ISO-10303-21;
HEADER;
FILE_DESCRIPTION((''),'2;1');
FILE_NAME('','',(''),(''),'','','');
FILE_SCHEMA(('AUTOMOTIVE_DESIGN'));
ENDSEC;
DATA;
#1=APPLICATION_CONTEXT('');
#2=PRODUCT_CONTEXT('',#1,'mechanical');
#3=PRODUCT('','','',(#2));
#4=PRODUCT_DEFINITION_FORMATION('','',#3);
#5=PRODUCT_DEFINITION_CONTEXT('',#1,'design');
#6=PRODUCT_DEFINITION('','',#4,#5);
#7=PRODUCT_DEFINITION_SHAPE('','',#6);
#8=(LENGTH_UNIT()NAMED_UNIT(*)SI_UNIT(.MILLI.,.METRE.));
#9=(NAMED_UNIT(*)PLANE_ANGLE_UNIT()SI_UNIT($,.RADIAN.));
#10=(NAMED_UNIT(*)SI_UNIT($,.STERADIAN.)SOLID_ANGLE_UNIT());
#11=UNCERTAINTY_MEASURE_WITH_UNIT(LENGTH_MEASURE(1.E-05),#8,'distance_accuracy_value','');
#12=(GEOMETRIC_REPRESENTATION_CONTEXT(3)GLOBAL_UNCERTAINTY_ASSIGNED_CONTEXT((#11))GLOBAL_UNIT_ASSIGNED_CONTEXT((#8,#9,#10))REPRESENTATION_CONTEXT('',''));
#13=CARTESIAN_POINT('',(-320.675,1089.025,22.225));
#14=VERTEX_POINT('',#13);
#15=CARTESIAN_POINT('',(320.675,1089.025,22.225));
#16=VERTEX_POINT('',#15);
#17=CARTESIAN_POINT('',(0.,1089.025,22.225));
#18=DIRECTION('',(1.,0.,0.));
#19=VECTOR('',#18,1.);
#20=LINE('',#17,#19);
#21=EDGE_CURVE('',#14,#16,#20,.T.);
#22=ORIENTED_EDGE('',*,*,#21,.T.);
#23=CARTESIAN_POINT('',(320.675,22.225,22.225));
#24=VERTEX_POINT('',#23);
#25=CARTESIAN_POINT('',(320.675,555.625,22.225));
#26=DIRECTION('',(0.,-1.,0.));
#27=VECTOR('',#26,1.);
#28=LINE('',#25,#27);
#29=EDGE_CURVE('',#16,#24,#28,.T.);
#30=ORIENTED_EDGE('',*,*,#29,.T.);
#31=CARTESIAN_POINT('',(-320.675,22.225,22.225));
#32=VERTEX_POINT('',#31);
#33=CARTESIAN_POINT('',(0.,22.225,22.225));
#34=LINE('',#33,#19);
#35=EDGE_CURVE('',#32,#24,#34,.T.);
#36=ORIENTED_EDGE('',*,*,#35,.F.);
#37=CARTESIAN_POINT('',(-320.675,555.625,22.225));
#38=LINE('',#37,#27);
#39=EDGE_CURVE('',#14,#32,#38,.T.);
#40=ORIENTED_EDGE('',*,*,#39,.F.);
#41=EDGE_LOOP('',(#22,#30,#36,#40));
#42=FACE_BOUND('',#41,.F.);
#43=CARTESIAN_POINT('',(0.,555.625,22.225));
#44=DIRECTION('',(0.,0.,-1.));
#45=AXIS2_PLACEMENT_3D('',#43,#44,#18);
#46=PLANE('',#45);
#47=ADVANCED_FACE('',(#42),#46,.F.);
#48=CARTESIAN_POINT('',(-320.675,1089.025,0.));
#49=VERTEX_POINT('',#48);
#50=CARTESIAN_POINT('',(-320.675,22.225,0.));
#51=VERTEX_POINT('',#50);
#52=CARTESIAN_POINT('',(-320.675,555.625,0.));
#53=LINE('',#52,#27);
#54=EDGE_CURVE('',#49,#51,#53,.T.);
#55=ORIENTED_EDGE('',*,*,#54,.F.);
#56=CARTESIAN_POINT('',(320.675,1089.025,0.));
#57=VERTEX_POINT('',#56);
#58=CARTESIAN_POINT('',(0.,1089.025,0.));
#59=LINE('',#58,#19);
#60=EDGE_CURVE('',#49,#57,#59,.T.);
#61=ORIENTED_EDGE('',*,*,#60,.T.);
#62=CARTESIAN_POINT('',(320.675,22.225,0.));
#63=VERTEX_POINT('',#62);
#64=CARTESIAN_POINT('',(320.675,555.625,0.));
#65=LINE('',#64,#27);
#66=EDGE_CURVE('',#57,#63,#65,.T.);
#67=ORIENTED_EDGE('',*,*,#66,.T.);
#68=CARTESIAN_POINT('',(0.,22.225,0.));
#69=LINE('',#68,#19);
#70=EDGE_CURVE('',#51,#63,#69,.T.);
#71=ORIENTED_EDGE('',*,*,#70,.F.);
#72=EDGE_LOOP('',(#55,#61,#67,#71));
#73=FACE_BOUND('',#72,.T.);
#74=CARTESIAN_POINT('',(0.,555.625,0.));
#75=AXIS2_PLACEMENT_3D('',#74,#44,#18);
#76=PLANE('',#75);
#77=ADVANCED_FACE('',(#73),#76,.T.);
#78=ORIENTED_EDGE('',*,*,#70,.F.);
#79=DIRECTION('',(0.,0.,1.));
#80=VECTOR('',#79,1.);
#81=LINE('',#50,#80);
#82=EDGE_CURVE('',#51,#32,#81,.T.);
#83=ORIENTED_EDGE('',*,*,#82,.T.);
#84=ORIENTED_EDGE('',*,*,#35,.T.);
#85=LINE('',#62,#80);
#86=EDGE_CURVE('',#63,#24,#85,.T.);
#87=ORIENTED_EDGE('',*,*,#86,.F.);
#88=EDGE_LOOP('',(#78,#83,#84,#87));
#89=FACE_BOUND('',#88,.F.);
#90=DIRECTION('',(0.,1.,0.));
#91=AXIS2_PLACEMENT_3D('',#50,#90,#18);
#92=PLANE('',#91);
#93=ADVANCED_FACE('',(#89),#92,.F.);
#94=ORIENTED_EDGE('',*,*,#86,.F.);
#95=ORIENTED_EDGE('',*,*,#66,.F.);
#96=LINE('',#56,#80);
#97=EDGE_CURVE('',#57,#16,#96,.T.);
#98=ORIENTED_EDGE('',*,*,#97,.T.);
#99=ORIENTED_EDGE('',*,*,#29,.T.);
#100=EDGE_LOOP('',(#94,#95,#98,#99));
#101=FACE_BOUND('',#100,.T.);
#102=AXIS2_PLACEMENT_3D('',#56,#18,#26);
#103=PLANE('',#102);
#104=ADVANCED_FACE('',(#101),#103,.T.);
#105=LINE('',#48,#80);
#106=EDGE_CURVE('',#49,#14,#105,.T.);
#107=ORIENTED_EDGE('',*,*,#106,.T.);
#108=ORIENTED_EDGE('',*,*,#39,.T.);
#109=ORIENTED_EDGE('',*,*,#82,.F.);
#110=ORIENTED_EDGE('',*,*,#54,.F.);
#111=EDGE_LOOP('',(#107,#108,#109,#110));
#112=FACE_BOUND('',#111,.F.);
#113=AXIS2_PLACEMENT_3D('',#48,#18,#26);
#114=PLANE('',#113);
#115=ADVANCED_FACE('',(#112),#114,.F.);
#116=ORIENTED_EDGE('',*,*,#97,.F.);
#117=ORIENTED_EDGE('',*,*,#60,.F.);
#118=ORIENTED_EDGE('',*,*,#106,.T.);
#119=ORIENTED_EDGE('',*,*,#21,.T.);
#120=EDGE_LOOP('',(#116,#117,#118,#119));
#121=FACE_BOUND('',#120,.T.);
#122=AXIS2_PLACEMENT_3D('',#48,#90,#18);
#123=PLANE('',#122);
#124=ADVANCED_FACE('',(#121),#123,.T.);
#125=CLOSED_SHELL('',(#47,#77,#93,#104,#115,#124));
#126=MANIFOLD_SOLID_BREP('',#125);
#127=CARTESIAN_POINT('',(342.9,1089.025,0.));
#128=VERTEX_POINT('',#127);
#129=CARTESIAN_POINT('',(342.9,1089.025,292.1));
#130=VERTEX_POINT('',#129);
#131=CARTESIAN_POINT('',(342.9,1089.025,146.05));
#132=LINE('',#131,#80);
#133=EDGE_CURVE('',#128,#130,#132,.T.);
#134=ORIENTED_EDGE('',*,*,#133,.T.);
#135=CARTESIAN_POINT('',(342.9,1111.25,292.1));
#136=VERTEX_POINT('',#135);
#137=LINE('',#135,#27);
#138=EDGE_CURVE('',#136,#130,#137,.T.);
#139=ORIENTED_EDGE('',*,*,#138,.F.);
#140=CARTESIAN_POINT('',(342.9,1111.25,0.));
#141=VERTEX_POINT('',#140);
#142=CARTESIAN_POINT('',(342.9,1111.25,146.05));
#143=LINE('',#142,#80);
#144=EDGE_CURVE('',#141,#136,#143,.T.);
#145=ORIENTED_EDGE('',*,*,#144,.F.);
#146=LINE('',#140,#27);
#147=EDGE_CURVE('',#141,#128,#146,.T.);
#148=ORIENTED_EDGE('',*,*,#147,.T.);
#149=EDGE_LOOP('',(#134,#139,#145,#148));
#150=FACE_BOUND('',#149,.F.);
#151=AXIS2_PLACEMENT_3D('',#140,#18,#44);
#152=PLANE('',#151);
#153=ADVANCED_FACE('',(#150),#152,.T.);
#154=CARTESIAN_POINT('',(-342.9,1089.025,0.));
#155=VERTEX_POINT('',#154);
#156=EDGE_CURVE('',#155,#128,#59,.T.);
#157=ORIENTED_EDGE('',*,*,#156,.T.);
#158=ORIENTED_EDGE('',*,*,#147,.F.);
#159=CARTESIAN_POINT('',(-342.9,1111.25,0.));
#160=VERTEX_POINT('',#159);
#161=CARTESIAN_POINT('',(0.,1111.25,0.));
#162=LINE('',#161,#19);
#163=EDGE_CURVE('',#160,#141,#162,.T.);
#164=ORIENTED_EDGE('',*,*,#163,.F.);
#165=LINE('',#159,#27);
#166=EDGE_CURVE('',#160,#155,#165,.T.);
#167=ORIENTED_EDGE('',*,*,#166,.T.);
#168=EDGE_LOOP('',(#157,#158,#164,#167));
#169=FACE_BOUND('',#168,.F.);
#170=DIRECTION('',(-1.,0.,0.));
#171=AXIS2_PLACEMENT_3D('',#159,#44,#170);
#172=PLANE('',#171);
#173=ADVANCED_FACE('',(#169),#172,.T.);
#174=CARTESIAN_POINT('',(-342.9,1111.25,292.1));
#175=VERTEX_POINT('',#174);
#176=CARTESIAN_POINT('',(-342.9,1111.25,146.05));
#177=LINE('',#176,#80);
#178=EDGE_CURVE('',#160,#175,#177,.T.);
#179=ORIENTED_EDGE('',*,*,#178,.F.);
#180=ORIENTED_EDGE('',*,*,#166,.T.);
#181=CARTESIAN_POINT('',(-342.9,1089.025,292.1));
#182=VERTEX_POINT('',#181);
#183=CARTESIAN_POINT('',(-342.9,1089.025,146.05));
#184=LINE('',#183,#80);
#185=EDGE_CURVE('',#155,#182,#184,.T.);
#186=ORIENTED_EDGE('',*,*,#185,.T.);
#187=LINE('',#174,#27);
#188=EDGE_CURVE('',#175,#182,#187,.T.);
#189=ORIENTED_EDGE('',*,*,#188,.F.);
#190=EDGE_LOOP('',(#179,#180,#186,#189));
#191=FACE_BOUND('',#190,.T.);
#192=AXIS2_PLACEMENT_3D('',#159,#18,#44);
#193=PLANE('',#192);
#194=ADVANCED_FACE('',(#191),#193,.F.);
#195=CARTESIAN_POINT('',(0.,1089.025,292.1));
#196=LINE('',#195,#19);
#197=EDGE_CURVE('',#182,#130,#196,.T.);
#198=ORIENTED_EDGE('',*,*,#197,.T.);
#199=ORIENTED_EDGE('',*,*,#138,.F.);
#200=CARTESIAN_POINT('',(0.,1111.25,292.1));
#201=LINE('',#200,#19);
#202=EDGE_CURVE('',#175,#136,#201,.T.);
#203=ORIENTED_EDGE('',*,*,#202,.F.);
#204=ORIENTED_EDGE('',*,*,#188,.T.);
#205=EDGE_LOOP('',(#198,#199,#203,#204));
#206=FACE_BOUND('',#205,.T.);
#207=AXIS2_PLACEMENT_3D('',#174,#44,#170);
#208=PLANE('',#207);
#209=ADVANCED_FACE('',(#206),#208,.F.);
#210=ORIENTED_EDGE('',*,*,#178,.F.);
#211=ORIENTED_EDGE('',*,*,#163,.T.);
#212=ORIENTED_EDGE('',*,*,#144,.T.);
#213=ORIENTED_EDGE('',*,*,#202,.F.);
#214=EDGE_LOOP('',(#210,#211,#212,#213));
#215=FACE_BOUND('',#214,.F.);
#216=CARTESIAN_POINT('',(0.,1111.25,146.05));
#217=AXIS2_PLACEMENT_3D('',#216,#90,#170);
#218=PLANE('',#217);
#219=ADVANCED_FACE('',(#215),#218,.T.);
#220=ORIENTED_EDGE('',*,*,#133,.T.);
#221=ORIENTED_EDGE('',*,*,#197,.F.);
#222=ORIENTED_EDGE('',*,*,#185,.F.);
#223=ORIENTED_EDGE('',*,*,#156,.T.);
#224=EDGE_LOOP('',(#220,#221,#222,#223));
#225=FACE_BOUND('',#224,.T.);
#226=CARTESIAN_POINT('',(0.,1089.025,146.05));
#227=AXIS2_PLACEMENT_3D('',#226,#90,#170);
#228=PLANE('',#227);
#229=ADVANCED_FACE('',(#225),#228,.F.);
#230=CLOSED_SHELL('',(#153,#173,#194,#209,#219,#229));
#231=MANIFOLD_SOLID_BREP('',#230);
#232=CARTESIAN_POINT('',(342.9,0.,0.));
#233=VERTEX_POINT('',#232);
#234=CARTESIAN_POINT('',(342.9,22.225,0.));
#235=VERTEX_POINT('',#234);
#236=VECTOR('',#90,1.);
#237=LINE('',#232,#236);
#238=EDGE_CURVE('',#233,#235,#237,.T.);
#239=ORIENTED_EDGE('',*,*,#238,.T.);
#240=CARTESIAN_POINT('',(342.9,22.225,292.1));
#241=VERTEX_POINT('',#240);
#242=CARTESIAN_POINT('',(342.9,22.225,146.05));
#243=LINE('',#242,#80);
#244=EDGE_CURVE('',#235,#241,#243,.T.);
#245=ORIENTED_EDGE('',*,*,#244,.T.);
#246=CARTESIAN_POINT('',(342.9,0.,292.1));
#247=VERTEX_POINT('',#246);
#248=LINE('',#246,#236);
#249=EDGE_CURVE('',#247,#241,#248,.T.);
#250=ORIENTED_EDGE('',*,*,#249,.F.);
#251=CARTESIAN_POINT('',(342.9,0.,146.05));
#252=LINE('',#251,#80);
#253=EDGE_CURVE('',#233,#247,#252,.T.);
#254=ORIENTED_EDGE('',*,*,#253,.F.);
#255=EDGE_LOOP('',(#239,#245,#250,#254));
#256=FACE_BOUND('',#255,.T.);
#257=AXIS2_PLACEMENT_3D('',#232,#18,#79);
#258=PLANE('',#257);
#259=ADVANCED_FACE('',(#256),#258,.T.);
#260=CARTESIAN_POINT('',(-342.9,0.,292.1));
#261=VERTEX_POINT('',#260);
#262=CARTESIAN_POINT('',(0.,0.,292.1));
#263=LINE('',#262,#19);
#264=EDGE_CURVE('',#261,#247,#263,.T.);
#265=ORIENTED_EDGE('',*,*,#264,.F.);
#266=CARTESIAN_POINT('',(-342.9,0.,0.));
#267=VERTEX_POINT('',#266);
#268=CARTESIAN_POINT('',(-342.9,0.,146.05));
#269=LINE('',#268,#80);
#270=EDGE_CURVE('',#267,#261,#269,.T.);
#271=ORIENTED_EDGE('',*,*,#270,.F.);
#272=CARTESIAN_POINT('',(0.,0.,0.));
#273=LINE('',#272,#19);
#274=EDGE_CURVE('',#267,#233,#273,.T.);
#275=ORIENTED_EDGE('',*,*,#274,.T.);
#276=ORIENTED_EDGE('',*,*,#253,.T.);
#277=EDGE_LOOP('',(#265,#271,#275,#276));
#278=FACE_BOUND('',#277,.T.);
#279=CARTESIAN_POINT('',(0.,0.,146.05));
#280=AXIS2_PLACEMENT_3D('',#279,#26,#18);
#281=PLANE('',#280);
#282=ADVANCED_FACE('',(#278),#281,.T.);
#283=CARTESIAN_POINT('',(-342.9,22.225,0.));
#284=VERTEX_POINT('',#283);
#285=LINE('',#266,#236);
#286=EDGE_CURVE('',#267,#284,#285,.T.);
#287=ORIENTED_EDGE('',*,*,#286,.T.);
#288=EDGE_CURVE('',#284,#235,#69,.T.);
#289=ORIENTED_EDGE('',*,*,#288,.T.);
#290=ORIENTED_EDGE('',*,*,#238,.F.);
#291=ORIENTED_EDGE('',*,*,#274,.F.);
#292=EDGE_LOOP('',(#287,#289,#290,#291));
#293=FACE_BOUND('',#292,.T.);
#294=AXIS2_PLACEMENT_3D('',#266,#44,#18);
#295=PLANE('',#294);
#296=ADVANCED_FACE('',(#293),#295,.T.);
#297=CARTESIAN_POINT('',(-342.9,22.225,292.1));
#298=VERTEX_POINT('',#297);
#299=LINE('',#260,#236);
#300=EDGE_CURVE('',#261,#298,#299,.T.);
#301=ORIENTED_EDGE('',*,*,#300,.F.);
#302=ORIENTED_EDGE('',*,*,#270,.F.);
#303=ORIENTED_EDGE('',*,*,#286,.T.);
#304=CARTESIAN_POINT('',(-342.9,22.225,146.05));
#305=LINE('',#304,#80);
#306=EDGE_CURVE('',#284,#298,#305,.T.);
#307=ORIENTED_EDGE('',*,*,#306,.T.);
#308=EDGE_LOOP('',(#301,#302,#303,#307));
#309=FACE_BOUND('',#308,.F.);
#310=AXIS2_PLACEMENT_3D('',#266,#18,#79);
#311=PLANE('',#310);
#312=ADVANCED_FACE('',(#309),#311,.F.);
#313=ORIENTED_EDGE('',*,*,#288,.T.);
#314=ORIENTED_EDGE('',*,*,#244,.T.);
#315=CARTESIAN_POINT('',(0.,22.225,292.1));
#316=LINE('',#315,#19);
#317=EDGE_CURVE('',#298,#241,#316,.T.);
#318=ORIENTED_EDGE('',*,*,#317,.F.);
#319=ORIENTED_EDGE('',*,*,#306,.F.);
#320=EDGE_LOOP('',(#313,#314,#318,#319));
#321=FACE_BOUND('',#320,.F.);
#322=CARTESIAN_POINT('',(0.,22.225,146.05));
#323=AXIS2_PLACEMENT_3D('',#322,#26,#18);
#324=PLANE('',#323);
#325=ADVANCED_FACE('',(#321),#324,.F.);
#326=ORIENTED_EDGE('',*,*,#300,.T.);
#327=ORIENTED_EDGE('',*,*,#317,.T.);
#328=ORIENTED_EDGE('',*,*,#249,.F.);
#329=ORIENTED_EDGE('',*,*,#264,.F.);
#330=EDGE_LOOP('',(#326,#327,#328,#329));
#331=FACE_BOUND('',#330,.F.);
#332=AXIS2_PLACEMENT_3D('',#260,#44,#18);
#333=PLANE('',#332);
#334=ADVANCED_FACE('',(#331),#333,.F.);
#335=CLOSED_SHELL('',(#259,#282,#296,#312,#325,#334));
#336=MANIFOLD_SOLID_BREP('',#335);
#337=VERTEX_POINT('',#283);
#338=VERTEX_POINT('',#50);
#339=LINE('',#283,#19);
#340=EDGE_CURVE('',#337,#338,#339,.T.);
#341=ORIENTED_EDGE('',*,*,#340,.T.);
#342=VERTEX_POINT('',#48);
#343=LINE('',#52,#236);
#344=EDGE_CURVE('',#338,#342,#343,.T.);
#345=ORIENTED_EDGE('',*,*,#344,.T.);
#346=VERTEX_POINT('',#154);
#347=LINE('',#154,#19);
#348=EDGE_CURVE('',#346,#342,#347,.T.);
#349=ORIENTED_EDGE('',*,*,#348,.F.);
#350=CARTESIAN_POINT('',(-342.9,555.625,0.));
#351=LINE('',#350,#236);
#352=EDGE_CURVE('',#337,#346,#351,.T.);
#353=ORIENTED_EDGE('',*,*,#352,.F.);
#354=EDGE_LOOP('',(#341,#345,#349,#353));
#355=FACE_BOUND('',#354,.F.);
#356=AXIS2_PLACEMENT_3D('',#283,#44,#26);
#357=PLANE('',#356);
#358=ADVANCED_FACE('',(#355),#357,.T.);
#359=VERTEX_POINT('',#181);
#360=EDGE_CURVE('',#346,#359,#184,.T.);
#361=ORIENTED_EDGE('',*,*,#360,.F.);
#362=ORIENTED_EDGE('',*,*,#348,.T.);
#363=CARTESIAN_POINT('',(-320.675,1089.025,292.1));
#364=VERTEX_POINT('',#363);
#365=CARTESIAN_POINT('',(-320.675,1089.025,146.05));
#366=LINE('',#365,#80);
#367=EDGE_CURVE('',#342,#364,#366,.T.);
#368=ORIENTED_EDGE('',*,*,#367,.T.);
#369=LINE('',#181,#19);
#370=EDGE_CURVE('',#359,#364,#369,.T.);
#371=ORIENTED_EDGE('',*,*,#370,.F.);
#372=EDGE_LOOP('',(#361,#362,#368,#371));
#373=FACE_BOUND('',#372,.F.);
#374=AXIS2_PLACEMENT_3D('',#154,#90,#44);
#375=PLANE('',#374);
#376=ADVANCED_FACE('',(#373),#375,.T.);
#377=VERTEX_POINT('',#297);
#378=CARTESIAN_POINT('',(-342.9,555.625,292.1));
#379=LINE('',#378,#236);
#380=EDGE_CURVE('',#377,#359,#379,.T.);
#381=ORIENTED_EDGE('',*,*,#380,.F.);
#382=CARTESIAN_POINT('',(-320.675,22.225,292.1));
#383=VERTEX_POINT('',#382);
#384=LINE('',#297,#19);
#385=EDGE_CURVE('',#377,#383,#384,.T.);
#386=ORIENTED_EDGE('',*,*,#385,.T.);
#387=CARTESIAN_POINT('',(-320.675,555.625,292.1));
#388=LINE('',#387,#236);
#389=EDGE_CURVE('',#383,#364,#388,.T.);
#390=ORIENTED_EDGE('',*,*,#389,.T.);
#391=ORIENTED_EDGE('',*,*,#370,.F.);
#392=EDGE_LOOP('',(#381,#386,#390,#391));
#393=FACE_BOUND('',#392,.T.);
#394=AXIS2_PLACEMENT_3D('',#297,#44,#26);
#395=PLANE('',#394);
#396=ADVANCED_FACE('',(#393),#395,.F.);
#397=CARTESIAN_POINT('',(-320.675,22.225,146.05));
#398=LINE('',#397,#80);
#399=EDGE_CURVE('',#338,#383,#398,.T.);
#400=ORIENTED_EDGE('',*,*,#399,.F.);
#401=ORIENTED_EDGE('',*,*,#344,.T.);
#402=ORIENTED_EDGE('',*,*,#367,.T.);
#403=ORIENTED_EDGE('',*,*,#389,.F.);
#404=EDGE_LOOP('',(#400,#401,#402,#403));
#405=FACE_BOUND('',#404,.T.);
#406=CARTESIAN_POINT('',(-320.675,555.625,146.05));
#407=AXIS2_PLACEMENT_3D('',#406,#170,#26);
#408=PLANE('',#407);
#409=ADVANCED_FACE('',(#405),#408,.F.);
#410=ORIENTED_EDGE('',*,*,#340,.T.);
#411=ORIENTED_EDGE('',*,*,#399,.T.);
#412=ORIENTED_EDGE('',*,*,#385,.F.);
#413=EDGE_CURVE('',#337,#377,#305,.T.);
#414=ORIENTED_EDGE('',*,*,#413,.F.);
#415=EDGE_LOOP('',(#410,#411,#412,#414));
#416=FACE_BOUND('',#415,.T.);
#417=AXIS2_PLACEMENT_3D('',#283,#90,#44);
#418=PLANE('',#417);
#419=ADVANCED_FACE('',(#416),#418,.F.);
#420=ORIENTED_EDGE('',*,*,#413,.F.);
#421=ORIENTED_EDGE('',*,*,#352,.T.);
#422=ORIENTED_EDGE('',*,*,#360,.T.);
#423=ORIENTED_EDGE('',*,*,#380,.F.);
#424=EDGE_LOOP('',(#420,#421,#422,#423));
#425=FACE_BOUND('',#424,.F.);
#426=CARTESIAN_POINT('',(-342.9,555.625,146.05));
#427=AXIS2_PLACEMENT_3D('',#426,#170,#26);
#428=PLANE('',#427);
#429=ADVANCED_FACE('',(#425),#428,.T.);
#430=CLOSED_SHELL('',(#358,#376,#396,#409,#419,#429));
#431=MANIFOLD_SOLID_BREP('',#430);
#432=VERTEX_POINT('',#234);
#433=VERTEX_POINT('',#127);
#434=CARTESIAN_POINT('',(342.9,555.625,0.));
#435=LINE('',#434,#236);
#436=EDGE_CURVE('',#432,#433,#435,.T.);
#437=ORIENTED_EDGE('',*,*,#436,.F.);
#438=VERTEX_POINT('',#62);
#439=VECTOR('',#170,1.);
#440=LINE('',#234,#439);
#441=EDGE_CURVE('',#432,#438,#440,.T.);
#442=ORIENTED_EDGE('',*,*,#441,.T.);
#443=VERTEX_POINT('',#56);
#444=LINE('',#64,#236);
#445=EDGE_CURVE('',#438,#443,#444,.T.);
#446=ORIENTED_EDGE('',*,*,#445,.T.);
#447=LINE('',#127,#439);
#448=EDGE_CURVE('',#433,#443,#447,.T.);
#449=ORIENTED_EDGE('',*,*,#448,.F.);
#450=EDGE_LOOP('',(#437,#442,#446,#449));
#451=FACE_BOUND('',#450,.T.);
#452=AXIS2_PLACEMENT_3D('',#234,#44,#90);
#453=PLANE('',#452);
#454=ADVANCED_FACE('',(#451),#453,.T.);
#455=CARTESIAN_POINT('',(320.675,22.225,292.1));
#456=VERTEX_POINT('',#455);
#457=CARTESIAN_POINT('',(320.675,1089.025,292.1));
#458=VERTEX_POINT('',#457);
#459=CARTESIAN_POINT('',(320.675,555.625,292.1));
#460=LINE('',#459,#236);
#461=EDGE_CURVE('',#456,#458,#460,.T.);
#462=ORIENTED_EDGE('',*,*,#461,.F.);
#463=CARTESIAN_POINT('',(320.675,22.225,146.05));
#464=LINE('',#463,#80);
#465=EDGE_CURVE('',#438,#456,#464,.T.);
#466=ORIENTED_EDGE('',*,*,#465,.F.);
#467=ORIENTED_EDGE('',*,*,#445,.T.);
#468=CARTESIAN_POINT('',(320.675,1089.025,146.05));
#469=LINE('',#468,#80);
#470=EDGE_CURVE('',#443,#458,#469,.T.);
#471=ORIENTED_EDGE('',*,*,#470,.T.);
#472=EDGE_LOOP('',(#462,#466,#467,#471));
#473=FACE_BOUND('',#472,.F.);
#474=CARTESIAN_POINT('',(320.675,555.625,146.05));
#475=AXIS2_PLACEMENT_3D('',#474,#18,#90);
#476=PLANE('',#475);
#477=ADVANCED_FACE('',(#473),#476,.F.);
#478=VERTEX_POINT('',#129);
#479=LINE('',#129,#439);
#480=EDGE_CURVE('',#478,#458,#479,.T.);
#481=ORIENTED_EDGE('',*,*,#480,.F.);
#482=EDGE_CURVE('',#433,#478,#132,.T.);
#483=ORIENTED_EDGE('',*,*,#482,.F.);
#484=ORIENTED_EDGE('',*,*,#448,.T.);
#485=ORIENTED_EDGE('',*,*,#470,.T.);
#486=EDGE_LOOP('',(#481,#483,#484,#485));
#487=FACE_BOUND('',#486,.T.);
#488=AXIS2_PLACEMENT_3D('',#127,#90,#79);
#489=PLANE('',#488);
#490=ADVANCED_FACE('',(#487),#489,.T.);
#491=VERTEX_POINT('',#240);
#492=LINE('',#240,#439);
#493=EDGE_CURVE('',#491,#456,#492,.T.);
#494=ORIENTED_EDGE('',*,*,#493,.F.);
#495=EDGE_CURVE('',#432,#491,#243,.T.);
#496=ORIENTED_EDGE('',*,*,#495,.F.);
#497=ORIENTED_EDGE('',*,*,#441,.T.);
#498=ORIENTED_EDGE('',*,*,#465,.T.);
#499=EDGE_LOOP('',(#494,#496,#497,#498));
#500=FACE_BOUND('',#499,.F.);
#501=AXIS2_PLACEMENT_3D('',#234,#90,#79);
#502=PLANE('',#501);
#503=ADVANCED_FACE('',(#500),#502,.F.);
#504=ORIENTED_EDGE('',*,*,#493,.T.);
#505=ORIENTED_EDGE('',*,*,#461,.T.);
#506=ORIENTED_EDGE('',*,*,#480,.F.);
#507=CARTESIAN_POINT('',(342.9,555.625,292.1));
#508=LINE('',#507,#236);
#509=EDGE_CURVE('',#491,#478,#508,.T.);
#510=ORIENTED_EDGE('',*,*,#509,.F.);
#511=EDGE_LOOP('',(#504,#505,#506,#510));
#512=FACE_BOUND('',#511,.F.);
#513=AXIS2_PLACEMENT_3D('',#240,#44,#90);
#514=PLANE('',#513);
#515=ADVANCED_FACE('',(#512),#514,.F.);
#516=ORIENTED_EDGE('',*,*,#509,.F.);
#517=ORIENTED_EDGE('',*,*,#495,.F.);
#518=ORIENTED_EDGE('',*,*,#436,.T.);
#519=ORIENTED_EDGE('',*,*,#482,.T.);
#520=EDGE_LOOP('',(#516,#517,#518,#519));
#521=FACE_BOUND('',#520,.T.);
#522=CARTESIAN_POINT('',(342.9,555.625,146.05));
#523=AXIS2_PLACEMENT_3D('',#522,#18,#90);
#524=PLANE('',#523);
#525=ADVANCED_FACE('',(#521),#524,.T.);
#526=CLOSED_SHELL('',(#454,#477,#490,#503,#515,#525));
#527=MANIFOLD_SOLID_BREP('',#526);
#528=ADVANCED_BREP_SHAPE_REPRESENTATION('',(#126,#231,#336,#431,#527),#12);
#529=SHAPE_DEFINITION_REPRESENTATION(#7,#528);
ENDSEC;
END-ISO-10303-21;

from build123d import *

# Parameters (mm, degrees)
F1_W     = 685.8
F1_H     = 292.1
F2_DEPTH = 22.225
F3_W     = 641.35
F3_H     = 1066.8
F4_DEPTH = 22.225
F5_W     = 1066.8
F5_H     = 292.1
F6_DEPTH = 22.225


# Not quite as in the source:
# - a variable given as a bare number and used for a length is read in inches; the dataset says mm whatever the document's units were
# - a length typed as a fraction of an inch, garbled in the dataset ("3 / 203.2 mm" for 3/8 in), is restored


with BuildPart() as f2:
    # F1 (on Front) → F2 (new body)
    with BuildSketch(Plane.XZ):
        with Locations((0, 146.05)):
            Rectangle(F1_W, F1_H)
    extrude(amount=-F2_DEPTH)


with BuildPart() as f4:
    # F3 (on face) → F4 (new body)
    with BuildSketch(Plane(origin=(0, 0, 0), x_dir=(1, 0, 0), z_dir=(0, 0, -1))):
        with Locations((0, -555.625)):
            Rectangle(F3_W, F3_H)
    extrude(amount=-F4_DEPTH)


with BuildPart() as f6:
    # F5 (on face) → F6 (new body)
    with BuildSketch(Plane.YZ.offset(342.9)):
        with Locations((555.625, 146.05)):
            Rectangle(F5_W, F5_H)
    extrude(amount=-F6_DEPTH)


with BuildPart() as f7_1:
    # F7: instance of F6
    add(f6.part.mirror(Plane.YZ))


with BuildPart() as f9_1:
    # F9: instance of F2
    add(f2.part.mirror(Plane(origin=(331.7875, 555.625, 146.05), x_dir=(1, 0, 0), z_dir=(0, -1, 0))))


solid = Compound([f2.part, f4.part, f6.part, f7_1.part, f9_1.part])
